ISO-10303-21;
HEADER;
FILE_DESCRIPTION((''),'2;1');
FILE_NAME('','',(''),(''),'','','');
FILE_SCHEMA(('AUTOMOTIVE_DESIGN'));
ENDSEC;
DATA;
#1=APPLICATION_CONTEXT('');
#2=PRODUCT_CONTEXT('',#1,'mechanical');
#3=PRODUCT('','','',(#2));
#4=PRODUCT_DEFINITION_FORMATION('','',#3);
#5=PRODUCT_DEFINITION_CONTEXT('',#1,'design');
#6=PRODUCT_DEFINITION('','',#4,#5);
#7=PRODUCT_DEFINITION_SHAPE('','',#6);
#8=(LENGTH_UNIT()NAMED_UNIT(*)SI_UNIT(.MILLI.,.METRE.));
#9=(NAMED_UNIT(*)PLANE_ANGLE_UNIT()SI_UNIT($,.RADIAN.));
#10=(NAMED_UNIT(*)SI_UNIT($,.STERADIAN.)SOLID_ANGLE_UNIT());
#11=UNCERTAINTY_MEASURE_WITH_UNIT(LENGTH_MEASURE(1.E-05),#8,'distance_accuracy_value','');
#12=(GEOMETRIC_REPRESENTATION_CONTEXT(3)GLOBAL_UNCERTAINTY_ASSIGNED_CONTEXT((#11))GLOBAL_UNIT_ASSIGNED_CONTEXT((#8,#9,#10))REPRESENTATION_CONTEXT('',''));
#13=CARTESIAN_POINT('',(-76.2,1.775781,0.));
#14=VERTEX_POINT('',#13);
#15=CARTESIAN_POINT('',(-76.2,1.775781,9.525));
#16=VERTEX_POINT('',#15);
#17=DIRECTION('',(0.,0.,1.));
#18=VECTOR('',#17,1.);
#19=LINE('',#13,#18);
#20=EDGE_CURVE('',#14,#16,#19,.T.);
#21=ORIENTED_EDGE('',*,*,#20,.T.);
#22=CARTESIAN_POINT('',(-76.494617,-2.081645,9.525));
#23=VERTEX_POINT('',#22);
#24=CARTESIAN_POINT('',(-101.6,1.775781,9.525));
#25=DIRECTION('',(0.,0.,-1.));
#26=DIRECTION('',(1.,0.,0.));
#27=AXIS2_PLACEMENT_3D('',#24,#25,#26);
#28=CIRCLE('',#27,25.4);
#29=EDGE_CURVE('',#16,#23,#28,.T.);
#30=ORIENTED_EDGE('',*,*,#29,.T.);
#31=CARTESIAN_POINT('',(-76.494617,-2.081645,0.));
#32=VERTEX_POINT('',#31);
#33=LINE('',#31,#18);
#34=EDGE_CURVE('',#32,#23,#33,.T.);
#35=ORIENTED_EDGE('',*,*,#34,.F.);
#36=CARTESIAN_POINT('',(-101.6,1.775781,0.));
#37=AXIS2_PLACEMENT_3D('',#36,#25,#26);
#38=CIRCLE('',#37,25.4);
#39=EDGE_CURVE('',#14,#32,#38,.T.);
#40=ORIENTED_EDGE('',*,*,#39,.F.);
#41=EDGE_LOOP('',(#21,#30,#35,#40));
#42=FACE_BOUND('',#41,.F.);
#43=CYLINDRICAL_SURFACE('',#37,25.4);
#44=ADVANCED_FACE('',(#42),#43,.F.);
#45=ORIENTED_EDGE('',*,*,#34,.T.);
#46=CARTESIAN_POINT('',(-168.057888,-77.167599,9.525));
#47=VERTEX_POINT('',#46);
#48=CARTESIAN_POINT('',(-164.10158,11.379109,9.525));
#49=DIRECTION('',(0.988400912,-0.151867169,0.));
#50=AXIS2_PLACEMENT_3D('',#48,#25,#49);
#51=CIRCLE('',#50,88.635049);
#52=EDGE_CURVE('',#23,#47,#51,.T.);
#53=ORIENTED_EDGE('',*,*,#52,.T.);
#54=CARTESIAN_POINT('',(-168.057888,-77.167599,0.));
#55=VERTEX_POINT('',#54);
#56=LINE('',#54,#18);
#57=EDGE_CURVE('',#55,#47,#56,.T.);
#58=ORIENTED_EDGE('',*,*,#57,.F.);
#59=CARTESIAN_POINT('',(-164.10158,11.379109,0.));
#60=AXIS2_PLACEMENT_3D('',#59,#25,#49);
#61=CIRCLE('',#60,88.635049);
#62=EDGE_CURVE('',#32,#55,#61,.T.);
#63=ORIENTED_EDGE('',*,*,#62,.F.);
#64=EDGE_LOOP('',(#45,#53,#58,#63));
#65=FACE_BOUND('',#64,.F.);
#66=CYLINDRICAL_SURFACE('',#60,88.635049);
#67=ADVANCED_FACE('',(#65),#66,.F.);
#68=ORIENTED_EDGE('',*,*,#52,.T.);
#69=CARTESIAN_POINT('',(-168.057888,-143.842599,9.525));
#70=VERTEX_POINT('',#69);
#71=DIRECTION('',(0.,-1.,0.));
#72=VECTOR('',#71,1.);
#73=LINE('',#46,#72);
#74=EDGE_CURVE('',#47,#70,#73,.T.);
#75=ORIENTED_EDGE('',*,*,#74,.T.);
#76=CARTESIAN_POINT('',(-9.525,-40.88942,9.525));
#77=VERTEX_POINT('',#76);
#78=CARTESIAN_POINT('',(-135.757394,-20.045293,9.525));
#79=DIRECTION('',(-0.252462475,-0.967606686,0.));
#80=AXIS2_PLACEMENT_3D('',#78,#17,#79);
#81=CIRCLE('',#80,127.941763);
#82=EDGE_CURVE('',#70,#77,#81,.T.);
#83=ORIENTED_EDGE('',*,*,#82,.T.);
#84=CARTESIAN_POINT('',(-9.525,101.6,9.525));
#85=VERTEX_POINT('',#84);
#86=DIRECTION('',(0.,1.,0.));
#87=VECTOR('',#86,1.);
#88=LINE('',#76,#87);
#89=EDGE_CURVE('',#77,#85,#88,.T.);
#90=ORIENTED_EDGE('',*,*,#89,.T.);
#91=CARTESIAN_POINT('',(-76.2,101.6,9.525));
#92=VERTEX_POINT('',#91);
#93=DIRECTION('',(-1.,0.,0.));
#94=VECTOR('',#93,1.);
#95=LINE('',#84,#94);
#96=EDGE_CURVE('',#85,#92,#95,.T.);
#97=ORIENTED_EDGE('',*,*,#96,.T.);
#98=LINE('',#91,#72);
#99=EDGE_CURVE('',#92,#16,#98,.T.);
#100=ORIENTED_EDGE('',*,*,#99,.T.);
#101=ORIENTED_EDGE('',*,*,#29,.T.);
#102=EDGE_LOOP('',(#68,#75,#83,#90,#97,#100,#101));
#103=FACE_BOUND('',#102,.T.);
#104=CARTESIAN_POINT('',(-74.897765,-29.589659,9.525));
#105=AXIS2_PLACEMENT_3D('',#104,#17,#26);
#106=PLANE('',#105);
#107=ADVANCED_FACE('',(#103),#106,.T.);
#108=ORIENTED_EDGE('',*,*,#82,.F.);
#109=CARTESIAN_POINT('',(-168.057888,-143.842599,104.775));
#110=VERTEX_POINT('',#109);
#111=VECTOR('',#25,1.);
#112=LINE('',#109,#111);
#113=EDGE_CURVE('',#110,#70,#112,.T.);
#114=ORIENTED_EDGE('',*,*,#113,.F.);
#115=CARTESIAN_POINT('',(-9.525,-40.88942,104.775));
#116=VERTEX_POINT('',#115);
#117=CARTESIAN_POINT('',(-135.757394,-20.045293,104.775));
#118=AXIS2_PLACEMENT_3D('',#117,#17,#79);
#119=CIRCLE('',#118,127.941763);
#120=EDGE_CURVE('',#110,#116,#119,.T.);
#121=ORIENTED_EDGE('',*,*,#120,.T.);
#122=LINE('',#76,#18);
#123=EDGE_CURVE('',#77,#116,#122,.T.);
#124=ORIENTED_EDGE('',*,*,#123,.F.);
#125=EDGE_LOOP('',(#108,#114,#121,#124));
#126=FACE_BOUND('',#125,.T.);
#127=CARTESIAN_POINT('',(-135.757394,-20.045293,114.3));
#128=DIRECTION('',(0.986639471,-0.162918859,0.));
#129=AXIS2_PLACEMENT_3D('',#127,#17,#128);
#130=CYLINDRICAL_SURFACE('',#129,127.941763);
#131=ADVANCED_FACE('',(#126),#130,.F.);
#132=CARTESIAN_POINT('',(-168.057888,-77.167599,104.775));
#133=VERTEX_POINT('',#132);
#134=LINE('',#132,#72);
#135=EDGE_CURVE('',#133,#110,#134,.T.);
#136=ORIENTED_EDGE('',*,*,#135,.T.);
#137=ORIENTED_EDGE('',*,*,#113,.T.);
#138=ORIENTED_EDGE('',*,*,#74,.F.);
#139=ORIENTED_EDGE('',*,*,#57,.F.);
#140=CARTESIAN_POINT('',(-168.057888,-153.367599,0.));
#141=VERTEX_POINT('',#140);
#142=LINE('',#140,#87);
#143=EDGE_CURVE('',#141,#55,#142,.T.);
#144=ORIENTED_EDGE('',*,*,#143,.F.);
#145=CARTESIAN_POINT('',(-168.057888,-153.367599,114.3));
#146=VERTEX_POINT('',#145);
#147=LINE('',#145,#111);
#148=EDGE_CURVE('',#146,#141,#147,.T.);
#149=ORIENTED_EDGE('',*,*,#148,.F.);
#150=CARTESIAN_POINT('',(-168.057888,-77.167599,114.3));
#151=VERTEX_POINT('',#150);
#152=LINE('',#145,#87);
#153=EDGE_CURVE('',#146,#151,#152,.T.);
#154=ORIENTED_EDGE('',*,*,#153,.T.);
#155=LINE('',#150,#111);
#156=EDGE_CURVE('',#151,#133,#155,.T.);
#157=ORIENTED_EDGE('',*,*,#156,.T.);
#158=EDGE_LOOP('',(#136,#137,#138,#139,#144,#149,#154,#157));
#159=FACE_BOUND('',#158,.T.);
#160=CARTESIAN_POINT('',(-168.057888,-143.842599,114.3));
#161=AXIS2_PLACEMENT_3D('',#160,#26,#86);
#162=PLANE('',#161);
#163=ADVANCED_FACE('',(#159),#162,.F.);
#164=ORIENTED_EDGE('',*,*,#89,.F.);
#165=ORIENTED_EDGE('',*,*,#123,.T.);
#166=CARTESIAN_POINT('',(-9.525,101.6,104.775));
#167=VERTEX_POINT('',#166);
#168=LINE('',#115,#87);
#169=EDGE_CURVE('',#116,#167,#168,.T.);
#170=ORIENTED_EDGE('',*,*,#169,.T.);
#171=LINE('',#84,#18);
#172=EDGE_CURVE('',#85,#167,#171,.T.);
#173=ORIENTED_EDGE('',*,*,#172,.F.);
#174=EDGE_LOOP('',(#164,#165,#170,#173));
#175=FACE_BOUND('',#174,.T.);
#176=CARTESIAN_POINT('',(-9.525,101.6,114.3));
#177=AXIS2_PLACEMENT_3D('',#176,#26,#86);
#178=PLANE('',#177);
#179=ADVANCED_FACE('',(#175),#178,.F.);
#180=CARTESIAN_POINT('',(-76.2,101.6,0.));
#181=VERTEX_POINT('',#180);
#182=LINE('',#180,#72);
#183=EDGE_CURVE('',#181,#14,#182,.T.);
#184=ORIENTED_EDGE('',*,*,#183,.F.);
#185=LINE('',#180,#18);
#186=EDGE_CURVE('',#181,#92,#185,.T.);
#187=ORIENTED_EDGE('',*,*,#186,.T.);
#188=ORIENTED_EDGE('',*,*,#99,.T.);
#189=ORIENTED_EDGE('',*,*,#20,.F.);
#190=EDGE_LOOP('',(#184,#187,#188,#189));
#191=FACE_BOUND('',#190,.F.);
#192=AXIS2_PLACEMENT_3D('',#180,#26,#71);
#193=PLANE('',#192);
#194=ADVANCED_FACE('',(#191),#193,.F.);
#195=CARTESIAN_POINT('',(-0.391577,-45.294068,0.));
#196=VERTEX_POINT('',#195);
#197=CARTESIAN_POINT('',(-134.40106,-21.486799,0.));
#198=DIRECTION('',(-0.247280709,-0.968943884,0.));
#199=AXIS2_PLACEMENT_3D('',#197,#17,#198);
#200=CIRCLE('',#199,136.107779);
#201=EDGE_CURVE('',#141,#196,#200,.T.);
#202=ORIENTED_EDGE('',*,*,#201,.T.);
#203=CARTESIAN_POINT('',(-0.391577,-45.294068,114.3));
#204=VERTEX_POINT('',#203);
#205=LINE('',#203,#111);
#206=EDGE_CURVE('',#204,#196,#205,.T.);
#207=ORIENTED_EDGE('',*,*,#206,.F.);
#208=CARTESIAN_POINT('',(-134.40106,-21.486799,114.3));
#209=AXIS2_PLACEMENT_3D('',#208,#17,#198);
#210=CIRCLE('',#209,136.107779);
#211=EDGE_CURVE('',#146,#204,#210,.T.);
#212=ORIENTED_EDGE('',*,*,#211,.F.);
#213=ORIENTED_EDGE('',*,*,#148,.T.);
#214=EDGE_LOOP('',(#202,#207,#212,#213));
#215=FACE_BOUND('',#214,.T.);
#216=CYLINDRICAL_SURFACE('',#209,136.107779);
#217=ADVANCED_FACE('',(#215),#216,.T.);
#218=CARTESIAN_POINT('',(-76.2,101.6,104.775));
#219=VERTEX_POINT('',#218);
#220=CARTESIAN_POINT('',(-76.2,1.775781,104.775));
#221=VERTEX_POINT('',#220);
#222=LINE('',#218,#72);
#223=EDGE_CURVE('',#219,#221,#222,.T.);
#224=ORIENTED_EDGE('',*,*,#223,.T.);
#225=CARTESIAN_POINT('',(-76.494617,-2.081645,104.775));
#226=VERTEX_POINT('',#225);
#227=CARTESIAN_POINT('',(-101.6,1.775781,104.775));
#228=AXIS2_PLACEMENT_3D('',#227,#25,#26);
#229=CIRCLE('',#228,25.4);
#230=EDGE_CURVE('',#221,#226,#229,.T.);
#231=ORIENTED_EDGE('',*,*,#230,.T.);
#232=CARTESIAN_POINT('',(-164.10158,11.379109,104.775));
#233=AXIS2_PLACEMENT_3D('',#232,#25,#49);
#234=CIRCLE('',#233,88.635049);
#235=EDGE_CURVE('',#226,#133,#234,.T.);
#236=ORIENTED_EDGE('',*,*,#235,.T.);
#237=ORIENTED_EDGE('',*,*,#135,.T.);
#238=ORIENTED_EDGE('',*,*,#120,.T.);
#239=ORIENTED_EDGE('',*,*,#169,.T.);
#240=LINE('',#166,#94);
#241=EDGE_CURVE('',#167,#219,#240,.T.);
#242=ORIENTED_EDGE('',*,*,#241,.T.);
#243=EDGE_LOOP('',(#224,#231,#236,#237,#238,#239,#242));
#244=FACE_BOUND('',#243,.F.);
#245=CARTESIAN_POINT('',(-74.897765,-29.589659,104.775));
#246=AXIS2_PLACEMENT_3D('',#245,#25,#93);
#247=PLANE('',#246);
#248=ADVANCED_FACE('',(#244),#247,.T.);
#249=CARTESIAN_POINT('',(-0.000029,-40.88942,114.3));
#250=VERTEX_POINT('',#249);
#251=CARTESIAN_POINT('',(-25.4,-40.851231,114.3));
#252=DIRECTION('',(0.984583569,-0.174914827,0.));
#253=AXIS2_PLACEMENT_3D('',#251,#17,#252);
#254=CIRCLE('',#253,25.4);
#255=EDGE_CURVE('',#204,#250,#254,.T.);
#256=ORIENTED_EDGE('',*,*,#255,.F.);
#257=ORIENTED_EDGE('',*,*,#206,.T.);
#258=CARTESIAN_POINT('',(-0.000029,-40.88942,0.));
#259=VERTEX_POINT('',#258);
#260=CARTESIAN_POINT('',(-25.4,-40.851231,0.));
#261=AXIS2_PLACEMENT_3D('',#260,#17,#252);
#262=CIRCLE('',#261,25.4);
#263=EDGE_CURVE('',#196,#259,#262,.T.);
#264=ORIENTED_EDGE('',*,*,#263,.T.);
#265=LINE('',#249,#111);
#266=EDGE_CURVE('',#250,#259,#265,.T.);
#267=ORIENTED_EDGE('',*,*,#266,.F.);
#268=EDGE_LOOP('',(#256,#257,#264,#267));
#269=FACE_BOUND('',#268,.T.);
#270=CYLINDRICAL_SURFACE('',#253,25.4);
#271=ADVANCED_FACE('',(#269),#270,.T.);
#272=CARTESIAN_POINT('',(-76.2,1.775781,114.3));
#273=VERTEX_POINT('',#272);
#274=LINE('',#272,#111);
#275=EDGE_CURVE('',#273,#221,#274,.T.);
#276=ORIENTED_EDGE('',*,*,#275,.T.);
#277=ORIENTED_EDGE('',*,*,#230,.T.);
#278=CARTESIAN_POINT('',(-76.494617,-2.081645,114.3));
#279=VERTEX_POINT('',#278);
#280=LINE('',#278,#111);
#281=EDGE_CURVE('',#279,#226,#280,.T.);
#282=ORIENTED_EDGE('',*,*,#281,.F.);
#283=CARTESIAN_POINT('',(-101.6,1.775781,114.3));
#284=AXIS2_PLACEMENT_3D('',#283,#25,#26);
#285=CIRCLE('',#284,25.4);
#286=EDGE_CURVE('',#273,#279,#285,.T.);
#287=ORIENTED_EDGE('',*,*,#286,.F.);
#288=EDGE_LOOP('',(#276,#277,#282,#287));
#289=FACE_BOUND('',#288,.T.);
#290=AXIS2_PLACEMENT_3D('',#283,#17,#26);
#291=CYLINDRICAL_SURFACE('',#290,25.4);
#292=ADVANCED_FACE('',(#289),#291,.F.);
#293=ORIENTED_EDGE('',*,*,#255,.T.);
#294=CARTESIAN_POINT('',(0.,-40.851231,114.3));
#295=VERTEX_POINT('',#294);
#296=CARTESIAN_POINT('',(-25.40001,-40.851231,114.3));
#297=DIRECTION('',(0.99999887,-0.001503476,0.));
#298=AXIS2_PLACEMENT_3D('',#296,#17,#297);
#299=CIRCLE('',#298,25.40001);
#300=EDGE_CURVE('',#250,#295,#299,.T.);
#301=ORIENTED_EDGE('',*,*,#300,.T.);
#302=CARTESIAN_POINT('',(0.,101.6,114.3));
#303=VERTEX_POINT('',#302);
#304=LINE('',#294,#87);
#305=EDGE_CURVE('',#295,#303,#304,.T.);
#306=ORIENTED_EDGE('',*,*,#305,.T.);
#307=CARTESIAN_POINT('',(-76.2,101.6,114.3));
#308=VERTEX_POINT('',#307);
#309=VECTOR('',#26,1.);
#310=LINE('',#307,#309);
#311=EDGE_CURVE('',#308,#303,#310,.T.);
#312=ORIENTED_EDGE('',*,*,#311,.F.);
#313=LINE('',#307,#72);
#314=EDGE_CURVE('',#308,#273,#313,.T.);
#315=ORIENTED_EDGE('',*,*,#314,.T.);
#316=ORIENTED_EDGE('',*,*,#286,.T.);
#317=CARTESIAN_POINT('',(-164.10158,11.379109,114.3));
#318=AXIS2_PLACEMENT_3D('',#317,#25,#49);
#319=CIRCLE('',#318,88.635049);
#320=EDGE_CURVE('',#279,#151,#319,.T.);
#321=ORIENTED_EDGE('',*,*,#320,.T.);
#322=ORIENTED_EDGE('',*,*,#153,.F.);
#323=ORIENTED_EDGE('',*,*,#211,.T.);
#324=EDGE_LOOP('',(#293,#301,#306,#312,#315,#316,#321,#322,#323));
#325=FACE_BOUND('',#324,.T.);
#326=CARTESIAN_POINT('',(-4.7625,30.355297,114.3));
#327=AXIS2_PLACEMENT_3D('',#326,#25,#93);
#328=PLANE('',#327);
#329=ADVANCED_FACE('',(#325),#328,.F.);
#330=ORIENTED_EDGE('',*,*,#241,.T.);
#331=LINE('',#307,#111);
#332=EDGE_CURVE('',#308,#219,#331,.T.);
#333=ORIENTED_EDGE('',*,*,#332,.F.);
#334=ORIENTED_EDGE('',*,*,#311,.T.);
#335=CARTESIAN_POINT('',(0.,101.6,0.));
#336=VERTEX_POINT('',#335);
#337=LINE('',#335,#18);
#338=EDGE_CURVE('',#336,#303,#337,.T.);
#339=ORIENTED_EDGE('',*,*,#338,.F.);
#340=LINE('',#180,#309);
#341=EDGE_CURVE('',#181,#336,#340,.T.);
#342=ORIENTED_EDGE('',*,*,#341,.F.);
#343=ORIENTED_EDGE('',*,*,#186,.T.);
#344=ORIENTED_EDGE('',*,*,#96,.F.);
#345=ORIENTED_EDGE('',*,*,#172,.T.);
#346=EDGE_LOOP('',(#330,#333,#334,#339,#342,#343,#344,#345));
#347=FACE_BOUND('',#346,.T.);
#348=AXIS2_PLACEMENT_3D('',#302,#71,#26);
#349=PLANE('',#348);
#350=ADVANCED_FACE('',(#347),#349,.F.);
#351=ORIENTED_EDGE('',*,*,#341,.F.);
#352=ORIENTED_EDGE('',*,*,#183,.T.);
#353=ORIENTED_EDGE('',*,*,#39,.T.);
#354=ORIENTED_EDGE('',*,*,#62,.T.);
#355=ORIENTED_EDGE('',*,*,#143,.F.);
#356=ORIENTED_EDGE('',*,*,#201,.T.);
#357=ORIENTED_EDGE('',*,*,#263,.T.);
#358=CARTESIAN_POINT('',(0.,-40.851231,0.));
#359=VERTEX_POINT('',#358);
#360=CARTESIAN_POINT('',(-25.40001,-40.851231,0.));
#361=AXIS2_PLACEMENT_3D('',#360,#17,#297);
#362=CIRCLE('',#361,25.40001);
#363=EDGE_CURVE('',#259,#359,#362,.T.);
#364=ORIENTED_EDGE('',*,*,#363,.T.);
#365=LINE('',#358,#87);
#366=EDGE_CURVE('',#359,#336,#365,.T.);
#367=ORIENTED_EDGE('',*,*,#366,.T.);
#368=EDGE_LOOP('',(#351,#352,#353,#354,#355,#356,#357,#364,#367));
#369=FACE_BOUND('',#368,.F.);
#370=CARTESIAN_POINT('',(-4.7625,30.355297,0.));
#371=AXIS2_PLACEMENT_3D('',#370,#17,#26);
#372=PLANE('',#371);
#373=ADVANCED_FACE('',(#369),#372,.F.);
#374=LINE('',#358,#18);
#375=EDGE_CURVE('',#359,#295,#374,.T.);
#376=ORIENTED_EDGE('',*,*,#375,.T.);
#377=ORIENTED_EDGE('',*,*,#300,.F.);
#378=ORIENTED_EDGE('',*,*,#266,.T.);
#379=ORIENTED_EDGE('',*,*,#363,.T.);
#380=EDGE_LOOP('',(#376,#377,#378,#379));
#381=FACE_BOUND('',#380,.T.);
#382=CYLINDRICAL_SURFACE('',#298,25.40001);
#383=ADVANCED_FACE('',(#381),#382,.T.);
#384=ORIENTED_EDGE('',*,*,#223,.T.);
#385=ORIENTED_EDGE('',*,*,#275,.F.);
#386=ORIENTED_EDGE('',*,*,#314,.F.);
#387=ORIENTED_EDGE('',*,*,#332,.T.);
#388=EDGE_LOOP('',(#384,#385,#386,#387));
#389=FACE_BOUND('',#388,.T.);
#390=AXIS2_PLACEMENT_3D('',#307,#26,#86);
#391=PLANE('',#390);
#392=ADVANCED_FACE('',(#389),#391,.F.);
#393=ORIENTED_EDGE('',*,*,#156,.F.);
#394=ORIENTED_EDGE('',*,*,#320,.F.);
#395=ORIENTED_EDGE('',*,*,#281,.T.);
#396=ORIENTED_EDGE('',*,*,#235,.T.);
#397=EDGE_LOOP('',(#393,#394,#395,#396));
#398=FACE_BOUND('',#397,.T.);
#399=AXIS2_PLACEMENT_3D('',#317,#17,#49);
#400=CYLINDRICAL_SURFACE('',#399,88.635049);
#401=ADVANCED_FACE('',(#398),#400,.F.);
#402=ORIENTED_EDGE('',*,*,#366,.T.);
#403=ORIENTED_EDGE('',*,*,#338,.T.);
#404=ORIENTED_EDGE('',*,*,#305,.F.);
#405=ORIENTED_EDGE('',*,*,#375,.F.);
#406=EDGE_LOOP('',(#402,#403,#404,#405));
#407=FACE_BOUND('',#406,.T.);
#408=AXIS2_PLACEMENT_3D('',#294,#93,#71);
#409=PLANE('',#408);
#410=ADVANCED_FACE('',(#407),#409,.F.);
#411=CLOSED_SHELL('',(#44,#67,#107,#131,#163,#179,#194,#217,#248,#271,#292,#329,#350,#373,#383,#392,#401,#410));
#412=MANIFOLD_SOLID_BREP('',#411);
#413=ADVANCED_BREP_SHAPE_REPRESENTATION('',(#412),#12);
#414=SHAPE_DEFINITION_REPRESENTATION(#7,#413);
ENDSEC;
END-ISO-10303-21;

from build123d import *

# Parameters (mm, degrees)
F1_DEPTH = 9.525
F2_DEPTH = 57.15


# Not quite as in the source:
# - ends of sketch curves that miss each other by under 0.0002 mm in the source are joined


with BuildPart() as f1:
    # F0 (on Top) → F1 (new body)
    with BuildSketch(Plane.XY):
        with BuildLine():
            Line((-9.525, -40.8894196153), (-9.525, 101.6))
            Line((-9.525, 101.6), (-76.2, 101.6))
            Line((-76.2, 101.6), (-76.2, 1.7757813176))
            ThreePointArc((-76.2, 1.7757813176), (-76.2737613091, -0.1585489984), (-76.4946168324, -2.0816447683))
            ThreePointArc((-76.4946168324, -2.0816447683), (-107.8980822653, -57.1580249287), (-168.0578880185, -77.1675992495))
            Line((-168.0578880185, -77.1675992495), (-168.0578880185, -143.8425992495))
            ThreePointArc((-168.0578880185, -143.8425992495), (-66.0749732172, -127.3460628222), (-9.525, -40.8894196153))
        make_face()
    extrude(amount=F1_DEPTH)

    # F0 (on Top) → F2 (join)
    with BuildSketch(Plane.XY):
        with BuildLine():
            ThreePointArc((-2.87076e-05, -40.8894195721), (-7.1769e-06, -40.8703254289), (0, -40.8512312749))
            Line((0, -40.8512312749), (0, 101.6))
            Line((0, 101.6), (-9.525, 101.6))
            Line((-9.525, 101.6), (-9.525, -40.8894196153))
            Line((-9.525, -40.8894196153), (-2.87076e-05, -40.8894195721))
        make_face()
        with BuildLine():
            ThreePointArc((-0.3915773599, -45.2940678749), (-0.0997672663, -43.1002807673), (-2.87076e-05, -40.8894195721))
            Line((-2.87076e-05, -40.8894195721), (-9.525, -40.8894196153))
            ThreePointArc((-9.525, -40.8894196153), (-66.0749732172, -127.3460628222), (-168.0578880185, -143.8425992495))
            Line((-168.0578880185, -143.8425992495), (-168.0578880185, -153.3675992495))
            ThreePointArc((-168.0578880185, -153.3675992495), (-60.6607327041, -135.8882486075), (-0.3915773599, -45.2940678749))
        make_face()
    extrude(amount=F2_DEPTH)

    # F3: F1 across face


with BuildPart() as f1_1:
    add(f1.part)
    add(f1.part.mirror(Plane(origin=(-44.7738585302, -61.3523725629, 57.15), x_dir=(1, 0, 0), z_dir=(0, 0, 1))))


solid = f1_1.part
